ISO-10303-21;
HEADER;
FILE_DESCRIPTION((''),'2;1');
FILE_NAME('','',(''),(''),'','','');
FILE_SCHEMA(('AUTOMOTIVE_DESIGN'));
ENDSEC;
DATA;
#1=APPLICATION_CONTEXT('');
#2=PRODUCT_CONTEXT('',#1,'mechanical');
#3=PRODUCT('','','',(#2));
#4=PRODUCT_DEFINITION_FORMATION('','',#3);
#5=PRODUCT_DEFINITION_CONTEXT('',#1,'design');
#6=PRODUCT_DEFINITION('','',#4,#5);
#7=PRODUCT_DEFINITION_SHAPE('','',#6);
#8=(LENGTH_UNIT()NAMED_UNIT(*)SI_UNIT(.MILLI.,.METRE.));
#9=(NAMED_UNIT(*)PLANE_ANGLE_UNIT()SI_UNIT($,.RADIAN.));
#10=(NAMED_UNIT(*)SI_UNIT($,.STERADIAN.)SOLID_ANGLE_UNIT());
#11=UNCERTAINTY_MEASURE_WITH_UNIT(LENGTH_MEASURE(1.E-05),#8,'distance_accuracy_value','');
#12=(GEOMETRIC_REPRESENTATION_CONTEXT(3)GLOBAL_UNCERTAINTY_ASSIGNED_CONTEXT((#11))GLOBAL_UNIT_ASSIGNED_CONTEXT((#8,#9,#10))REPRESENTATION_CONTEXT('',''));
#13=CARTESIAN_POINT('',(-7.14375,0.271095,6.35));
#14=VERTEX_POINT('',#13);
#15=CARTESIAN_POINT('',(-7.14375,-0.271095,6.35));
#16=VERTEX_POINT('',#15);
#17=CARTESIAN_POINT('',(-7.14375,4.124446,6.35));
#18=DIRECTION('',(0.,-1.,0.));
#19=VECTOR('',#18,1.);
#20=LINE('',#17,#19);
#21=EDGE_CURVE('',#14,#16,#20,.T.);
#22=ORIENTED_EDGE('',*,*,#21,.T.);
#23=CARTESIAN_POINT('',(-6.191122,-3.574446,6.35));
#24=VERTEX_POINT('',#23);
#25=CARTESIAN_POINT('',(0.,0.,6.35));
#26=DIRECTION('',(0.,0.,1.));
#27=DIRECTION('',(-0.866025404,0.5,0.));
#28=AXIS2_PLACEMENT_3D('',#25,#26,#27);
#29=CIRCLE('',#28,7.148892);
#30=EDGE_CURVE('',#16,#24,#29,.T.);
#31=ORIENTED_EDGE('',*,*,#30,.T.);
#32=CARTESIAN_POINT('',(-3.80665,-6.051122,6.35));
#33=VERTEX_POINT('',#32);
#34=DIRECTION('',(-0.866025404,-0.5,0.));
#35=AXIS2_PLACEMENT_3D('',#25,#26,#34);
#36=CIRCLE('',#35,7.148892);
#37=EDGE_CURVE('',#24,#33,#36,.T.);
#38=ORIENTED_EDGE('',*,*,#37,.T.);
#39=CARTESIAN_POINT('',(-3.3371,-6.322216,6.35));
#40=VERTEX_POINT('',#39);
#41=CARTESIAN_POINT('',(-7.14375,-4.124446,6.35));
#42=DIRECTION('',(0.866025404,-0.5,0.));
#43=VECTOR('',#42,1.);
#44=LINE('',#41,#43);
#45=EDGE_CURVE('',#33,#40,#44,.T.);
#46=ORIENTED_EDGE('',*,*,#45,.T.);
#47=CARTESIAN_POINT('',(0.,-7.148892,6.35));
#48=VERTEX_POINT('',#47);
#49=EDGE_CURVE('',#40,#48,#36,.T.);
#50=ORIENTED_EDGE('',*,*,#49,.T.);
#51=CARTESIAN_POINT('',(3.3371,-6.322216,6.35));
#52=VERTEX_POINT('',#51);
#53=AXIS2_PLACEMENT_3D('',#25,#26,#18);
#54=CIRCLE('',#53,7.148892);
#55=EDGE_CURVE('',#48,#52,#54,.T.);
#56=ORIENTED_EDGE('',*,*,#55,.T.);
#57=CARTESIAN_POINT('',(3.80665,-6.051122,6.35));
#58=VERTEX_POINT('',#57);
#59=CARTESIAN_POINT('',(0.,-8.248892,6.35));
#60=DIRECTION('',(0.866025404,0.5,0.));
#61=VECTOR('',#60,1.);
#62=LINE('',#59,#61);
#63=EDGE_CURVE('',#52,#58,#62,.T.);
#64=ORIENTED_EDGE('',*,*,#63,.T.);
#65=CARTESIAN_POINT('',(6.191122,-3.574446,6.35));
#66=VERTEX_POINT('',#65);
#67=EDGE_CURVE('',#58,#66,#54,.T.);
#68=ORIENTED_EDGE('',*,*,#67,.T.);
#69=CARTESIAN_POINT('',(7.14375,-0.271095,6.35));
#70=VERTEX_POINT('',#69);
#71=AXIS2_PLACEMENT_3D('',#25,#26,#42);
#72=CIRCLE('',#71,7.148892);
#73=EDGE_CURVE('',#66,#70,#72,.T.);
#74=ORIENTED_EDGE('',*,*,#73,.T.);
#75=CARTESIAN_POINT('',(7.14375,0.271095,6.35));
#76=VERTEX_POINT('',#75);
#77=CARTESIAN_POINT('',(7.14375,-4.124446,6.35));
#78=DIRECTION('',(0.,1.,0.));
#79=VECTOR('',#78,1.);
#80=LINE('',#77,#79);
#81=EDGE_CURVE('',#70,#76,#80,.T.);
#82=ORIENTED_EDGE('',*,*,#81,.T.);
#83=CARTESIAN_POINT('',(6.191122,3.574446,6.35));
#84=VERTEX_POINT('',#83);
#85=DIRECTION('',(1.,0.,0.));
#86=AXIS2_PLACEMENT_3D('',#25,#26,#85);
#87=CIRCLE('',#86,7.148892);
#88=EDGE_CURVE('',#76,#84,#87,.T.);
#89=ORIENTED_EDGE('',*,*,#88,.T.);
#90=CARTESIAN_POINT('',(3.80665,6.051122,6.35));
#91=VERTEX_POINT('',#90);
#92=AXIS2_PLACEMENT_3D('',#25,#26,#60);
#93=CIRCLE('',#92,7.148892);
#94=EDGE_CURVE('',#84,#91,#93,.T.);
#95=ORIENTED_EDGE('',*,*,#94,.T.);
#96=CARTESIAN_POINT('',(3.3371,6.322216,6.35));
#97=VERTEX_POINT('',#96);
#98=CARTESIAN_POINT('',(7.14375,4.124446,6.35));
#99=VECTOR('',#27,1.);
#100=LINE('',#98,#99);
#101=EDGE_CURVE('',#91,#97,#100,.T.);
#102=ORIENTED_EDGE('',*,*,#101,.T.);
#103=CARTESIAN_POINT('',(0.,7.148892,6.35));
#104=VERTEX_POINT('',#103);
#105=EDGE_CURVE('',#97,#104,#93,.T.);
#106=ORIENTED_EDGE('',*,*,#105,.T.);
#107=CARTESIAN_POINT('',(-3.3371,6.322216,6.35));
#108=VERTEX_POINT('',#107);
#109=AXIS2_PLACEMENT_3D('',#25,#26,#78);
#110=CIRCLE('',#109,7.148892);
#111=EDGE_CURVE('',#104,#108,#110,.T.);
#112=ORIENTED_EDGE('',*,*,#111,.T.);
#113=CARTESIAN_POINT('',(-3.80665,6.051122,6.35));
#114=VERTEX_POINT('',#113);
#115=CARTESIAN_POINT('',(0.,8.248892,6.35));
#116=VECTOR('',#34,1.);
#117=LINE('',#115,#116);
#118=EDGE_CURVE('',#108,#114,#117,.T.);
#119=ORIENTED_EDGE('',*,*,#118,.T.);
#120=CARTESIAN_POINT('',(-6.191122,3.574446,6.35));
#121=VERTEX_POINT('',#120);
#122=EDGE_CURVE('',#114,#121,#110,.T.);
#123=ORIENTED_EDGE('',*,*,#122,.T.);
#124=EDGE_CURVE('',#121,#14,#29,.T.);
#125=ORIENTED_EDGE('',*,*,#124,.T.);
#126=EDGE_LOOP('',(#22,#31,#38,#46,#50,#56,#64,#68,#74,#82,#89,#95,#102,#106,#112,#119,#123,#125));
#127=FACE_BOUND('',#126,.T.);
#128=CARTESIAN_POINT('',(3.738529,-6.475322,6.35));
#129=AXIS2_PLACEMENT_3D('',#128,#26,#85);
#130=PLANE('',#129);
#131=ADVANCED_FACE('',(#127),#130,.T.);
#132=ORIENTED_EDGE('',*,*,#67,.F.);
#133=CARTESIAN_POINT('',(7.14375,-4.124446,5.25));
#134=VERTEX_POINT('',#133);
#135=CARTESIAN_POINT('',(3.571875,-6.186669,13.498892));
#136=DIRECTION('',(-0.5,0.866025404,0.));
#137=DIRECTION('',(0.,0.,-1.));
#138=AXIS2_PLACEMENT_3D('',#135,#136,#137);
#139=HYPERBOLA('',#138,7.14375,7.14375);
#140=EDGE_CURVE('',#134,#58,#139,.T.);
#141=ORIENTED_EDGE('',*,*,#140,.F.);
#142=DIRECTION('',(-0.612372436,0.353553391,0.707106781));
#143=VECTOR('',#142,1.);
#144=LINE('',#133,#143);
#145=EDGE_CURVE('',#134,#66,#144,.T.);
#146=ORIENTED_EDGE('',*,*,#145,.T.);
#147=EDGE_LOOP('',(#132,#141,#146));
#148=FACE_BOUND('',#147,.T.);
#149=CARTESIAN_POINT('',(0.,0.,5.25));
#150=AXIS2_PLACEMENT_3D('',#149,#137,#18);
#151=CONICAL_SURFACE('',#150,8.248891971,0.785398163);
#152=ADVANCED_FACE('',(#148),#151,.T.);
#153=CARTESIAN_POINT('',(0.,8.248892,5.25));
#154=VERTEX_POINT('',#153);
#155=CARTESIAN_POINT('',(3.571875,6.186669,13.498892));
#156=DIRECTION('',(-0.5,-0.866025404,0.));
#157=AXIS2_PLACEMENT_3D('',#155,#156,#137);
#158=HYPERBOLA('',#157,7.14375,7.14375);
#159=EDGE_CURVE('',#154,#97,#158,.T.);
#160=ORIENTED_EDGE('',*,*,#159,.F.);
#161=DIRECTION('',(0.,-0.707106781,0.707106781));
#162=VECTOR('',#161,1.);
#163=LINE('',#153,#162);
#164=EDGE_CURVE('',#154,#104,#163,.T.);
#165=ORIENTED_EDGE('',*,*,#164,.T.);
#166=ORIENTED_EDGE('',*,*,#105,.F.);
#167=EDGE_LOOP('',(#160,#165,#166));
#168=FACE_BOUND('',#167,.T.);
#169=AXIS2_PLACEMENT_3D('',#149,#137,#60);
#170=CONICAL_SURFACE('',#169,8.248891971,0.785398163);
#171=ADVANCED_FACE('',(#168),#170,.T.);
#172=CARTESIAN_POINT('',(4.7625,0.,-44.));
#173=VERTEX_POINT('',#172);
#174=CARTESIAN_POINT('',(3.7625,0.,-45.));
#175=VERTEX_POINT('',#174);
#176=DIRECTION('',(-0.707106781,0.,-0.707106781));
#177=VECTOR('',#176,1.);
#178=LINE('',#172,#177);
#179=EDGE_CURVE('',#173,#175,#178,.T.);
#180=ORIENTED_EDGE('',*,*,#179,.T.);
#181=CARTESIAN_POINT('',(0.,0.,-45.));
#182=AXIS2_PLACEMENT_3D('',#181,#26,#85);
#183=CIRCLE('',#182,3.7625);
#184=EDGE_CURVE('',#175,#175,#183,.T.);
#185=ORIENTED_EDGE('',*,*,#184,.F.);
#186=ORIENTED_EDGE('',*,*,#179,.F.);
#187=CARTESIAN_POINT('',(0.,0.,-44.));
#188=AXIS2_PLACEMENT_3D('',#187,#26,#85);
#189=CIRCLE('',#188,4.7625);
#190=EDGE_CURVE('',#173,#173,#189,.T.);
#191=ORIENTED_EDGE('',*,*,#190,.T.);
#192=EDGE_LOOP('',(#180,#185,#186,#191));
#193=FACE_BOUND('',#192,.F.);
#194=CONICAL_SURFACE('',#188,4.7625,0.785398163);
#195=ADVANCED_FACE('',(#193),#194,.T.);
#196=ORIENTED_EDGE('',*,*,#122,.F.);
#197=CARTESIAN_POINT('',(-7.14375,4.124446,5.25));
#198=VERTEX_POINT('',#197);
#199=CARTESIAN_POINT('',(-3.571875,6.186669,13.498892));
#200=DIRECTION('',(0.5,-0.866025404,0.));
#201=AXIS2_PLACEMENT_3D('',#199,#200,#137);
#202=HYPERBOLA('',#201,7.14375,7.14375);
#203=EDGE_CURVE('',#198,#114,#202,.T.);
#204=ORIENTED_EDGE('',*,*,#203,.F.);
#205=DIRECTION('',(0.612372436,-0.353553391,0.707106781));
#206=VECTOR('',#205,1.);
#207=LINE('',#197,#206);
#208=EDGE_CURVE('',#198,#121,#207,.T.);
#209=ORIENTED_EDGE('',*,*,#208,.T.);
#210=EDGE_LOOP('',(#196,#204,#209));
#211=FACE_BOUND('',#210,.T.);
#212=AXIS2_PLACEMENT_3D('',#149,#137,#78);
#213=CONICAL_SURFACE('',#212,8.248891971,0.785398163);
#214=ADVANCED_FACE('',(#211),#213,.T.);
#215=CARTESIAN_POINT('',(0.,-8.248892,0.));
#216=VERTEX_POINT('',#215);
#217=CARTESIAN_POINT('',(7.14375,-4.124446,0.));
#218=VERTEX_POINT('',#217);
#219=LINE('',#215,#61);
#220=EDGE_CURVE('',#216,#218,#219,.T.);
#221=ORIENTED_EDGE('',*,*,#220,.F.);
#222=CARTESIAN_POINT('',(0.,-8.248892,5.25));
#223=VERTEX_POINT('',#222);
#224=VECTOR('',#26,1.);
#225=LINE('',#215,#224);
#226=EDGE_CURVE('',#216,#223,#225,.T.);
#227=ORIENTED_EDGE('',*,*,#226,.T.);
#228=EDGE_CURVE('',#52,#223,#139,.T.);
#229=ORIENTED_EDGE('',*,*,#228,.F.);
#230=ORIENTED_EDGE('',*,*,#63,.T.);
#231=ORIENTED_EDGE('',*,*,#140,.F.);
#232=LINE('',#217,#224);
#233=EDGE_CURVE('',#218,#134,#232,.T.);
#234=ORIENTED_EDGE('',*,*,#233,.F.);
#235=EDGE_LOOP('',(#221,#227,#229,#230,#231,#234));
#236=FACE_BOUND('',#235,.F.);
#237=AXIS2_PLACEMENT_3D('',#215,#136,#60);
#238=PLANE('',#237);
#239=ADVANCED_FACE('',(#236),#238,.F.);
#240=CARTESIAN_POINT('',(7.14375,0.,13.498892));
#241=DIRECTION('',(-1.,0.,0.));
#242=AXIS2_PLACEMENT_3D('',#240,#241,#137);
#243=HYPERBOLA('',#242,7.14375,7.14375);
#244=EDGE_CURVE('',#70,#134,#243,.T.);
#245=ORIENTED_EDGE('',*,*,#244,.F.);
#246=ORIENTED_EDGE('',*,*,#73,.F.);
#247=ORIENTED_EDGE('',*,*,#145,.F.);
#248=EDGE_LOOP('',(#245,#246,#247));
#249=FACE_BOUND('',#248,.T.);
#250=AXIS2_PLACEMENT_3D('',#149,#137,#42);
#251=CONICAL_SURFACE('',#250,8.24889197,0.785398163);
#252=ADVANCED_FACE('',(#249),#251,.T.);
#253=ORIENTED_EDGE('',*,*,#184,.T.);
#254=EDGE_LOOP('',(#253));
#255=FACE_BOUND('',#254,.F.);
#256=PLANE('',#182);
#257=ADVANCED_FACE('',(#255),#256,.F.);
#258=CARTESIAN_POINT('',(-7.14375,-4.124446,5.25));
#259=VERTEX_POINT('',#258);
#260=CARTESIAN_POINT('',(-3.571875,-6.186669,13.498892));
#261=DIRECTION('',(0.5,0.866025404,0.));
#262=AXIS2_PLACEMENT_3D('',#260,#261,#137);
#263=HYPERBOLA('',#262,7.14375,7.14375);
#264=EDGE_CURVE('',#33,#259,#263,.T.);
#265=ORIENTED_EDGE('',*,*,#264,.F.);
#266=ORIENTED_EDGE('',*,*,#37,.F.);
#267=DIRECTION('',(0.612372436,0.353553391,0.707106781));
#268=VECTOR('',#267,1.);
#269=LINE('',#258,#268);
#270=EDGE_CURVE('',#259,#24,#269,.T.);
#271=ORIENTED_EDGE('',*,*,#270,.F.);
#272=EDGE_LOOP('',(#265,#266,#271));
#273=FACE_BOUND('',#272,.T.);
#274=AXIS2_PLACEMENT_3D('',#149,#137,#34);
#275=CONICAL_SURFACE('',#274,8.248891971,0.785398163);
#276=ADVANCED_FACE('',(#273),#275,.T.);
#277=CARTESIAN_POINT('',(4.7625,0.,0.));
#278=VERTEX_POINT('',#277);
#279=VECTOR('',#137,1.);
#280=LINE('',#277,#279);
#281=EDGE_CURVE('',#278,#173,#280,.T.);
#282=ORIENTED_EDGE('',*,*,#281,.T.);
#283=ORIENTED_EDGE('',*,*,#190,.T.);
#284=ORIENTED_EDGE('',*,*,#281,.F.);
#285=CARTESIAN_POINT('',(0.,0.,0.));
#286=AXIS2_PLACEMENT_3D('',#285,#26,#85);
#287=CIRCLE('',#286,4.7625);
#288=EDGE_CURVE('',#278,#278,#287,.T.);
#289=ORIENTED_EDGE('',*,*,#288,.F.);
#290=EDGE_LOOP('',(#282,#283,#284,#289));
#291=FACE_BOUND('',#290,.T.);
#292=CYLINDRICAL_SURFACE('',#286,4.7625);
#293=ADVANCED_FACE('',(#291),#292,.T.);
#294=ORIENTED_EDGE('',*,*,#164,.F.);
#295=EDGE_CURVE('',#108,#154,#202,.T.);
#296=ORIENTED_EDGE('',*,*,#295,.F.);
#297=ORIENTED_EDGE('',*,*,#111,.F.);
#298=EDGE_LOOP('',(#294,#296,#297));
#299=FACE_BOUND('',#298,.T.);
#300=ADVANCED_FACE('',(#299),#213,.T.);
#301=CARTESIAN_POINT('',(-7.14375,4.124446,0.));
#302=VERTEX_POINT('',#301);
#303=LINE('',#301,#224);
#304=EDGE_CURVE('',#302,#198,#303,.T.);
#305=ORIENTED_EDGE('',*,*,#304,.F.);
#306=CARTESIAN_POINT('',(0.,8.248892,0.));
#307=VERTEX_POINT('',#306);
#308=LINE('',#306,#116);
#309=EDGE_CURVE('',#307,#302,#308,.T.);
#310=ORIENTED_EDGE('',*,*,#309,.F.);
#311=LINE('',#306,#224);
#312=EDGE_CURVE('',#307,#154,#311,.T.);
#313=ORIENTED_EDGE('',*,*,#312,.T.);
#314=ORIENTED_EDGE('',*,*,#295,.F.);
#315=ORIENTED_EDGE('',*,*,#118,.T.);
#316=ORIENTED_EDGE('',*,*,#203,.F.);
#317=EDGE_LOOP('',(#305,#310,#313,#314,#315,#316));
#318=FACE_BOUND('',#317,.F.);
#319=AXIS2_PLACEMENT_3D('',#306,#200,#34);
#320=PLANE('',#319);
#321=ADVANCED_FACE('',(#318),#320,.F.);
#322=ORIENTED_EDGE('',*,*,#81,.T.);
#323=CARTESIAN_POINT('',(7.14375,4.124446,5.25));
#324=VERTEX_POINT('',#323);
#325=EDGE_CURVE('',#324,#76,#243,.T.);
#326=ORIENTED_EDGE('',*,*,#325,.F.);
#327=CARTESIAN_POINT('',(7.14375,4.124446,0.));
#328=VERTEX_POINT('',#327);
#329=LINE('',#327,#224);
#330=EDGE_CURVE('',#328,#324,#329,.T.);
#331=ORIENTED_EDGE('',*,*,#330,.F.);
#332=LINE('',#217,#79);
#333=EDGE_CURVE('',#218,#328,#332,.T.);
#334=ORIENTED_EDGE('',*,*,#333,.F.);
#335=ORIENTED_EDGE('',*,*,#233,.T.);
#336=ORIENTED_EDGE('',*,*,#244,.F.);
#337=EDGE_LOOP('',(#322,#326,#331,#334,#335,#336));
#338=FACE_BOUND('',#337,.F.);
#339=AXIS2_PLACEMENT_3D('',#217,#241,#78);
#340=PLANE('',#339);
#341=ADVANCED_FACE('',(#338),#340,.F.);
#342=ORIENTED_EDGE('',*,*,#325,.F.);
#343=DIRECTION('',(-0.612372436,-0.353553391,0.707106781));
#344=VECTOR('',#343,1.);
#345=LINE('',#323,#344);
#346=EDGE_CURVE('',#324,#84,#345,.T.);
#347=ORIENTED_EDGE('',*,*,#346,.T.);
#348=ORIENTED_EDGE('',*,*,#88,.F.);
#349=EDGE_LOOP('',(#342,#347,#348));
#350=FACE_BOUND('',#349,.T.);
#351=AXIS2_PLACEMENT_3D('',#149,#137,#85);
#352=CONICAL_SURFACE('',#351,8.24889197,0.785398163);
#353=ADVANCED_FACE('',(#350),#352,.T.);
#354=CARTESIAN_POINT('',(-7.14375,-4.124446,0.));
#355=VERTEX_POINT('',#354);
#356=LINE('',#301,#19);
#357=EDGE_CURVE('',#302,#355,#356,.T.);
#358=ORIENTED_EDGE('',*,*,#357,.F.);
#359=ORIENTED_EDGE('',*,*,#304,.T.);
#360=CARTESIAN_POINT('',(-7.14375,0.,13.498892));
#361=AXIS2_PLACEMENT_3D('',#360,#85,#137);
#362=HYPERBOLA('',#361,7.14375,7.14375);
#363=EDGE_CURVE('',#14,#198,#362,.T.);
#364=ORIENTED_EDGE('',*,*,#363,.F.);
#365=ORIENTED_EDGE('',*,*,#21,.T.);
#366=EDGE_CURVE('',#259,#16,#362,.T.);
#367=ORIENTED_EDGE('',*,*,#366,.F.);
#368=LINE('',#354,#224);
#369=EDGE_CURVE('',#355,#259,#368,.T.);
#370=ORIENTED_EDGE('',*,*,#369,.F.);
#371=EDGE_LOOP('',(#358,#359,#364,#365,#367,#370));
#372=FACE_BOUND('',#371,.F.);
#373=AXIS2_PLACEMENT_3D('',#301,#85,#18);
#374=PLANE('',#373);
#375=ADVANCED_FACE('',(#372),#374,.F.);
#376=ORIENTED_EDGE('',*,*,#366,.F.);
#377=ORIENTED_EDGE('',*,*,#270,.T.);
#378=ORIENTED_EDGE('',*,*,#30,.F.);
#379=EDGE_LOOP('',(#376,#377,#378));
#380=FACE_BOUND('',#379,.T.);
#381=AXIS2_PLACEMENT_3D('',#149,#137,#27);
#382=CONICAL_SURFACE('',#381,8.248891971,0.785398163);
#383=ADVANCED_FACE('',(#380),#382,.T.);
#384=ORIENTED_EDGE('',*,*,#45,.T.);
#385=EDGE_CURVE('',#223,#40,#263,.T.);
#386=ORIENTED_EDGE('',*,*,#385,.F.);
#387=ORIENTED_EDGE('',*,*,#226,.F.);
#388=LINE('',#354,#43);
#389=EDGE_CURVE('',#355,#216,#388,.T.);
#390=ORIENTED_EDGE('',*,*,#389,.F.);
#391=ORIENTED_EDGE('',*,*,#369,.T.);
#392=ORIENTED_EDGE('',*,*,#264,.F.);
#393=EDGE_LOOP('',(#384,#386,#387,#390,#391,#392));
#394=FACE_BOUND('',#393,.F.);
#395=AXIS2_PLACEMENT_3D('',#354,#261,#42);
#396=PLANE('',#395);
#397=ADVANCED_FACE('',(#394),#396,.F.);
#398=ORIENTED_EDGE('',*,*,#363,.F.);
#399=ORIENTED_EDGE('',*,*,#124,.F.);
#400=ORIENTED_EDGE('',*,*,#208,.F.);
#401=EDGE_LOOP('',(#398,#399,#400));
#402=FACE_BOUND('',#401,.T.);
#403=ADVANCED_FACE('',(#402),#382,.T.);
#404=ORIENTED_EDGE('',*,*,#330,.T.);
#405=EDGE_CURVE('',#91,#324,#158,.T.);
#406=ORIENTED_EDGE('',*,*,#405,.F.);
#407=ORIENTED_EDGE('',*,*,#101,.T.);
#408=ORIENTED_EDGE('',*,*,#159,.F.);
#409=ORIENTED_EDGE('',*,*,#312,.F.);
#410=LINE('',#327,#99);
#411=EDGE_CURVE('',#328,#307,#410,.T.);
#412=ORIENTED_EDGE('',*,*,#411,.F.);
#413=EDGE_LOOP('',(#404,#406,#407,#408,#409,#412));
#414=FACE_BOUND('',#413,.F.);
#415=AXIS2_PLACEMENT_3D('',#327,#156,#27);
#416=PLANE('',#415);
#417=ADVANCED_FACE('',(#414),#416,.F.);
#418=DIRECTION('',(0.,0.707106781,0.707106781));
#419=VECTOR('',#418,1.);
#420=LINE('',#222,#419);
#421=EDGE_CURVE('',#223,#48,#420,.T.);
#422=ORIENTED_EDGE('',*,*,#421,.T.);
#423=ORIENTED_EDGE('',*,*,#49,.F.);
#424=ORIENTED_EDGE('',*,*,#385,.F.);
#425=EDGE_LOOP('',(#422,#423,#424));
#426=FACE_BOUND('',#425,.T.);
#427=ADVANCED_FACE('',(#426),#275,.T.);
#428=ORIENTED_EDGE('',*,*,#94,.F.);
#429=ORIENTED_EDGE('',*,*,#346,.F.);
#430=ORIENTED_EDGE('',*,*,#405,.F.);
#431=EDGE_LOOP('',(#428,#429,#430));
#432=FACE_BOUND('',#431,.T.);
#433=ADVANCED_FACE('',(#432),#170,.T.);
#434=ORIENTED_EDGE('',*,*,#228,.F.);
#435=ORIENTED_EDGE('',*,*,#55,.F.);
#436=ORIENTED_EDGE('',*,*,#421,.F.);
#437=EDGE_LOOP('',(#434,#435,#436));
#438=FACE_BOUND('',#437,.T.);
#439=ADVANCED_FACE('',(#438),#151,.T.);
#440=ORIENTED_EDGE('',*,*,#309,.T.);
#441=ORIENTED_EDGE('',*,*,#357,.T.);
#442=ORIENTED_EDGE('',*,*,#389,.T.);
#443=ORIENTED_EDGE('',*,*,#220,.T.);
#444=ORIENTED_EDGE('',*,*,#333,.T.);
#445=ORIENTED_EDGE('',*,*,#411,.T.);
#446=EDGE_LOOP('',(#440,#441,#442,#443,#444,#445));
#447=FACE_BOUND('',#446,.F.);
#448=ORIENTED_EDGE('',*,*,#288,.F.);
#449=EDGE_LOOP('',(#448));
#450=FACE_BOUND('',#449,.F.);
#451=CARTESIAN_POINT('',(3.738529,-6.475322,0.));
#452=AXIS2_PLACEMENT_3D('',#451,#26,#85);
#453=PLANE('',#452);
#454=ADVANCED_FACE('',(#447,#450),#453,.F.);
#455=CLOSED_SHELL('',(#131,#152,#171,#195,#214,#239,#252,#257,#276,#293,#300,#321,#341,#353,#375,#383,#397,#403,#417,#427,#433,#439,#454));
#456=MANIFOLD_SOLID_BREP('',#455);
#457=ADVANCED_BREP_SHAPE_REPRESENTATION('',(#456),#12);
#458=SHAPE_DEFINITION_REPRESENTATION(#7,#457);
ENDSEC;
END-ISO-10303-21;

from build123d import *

# Parameters (mm, degrees)
F0_R     = 4.7625
F1_DEPTH = 6.35
F2_SIZE  = 1.1
F3_DEPTH = 6.35
F4_DEPTH = 45
F5_SIZE  = 1


# Not quite as in the source:
# - a length typed as a fraction of an inch, garbled in the dataset ("3 / 203.2 mm" for 3/8 in), is restored


with BuildPart() as f1:
    # F0 (on Top) → F1 (new body)
    with BuildSketch(Plane.XY):
        with BuildLine():
            ThreePointArc((0, -8.248891971), (4.1244459855, -7.14375), (7.14375, -4.1244459855))
            Line((7.14375, -4.1244459855), (0, -8.248891971))
        make_face()
        with BuildLine():
            ThreePointArc((8.248891971, 0), (7.9678177931, 2.1349703431), (7.14375, 4.1244459855))
            Line((7.14375, 4.1244459855), (7.14375, -4.1244459855))
            ThreePointArc((7.14375, -4.1244459855), (7.9678177931, -2.1349703431), (8.248891971, 0))
        make_face()
        with BuildLine():
            Line((0, 8.248891971), (7.14375, 4.1244459855))
            ThreePointArc((7.14375, 4.1244459855), (4.1244459855, 7.14375), (0, 8.248891971))
        make_face()
        with BuildLine():
            Line((-7.14375, 4.1244459855), (0, 8.248891971))
            ThreePointArc((0, 8.248891971), (-4.1244459855, 7.14375), (-7.14375, 4.1244459855))
        make_face()
        Polygon((7.14375, -4.1244459855), (7.14375, 4.1244459855), (0, 8.248891971), (-7.14375, 4.1244459855), (-7.14375, -4.1244459855), (0, -8.248891971), align=None)
        Circle(F0_R, mode=Mode.SUBTRACT)
        Circle(F0_R)
        with BuildLine():
            Line((-7.14375, -4.1244459855), (-7.14375, 4.1244459855))
            ThreePointArc((-7.14375, 4.1244459855), (-8.248891971, 0), (-7.14375, -4.1244459855))
        make_face()
        with BuildLine():
            ThreePointArc((-7.14375, -4.1244459855), (-4.1244459855, -7.14375), (0, -8.248891971))
            Line((0, -8.248891971), (-7.14375, -4.1244459855))
        make_face()
    extrude(amount=F1_DEPTH)

    # F2
    f2_edges = [f1.edges().sort_by_distance(p)[0] for p in [
        (7.14375, 4.124446, 6.35),
    ]]
    chamfer(f2_edges, length=F2_SIZE)

    # F0 (on Top) → F3 (intersect)
    with BuildSketch(Plane.XY):
        Polygon((7.14375, -4.1244459855), (7.14375, 4.1244459855), (0, 8.248891971), (-7.14375, 4.1244459855), (-7.14375, -4.1244459855), (0, -8.248891971), align=None)
        Circle(F0_R, mode=Mode.SUBTRACT)
        Circle(F0_R)
    extrude(amount=F3_DEPTH, mode=Mode.INTERSECT)

    # F0 (on Top) → F4 (join)
    with BuildSketch(Plane.XY):
        Circle(F0_R)
    extrude(amount=-F4_DEPTH)

    # F5
    f5_edges = [f1.edges().sort_by_distance(p)[0] for p in [
        (-4.7625, 0, -45),
    ]]
    chamfer(f5_edges, length=F5_SIZE)


solid = f1.part
